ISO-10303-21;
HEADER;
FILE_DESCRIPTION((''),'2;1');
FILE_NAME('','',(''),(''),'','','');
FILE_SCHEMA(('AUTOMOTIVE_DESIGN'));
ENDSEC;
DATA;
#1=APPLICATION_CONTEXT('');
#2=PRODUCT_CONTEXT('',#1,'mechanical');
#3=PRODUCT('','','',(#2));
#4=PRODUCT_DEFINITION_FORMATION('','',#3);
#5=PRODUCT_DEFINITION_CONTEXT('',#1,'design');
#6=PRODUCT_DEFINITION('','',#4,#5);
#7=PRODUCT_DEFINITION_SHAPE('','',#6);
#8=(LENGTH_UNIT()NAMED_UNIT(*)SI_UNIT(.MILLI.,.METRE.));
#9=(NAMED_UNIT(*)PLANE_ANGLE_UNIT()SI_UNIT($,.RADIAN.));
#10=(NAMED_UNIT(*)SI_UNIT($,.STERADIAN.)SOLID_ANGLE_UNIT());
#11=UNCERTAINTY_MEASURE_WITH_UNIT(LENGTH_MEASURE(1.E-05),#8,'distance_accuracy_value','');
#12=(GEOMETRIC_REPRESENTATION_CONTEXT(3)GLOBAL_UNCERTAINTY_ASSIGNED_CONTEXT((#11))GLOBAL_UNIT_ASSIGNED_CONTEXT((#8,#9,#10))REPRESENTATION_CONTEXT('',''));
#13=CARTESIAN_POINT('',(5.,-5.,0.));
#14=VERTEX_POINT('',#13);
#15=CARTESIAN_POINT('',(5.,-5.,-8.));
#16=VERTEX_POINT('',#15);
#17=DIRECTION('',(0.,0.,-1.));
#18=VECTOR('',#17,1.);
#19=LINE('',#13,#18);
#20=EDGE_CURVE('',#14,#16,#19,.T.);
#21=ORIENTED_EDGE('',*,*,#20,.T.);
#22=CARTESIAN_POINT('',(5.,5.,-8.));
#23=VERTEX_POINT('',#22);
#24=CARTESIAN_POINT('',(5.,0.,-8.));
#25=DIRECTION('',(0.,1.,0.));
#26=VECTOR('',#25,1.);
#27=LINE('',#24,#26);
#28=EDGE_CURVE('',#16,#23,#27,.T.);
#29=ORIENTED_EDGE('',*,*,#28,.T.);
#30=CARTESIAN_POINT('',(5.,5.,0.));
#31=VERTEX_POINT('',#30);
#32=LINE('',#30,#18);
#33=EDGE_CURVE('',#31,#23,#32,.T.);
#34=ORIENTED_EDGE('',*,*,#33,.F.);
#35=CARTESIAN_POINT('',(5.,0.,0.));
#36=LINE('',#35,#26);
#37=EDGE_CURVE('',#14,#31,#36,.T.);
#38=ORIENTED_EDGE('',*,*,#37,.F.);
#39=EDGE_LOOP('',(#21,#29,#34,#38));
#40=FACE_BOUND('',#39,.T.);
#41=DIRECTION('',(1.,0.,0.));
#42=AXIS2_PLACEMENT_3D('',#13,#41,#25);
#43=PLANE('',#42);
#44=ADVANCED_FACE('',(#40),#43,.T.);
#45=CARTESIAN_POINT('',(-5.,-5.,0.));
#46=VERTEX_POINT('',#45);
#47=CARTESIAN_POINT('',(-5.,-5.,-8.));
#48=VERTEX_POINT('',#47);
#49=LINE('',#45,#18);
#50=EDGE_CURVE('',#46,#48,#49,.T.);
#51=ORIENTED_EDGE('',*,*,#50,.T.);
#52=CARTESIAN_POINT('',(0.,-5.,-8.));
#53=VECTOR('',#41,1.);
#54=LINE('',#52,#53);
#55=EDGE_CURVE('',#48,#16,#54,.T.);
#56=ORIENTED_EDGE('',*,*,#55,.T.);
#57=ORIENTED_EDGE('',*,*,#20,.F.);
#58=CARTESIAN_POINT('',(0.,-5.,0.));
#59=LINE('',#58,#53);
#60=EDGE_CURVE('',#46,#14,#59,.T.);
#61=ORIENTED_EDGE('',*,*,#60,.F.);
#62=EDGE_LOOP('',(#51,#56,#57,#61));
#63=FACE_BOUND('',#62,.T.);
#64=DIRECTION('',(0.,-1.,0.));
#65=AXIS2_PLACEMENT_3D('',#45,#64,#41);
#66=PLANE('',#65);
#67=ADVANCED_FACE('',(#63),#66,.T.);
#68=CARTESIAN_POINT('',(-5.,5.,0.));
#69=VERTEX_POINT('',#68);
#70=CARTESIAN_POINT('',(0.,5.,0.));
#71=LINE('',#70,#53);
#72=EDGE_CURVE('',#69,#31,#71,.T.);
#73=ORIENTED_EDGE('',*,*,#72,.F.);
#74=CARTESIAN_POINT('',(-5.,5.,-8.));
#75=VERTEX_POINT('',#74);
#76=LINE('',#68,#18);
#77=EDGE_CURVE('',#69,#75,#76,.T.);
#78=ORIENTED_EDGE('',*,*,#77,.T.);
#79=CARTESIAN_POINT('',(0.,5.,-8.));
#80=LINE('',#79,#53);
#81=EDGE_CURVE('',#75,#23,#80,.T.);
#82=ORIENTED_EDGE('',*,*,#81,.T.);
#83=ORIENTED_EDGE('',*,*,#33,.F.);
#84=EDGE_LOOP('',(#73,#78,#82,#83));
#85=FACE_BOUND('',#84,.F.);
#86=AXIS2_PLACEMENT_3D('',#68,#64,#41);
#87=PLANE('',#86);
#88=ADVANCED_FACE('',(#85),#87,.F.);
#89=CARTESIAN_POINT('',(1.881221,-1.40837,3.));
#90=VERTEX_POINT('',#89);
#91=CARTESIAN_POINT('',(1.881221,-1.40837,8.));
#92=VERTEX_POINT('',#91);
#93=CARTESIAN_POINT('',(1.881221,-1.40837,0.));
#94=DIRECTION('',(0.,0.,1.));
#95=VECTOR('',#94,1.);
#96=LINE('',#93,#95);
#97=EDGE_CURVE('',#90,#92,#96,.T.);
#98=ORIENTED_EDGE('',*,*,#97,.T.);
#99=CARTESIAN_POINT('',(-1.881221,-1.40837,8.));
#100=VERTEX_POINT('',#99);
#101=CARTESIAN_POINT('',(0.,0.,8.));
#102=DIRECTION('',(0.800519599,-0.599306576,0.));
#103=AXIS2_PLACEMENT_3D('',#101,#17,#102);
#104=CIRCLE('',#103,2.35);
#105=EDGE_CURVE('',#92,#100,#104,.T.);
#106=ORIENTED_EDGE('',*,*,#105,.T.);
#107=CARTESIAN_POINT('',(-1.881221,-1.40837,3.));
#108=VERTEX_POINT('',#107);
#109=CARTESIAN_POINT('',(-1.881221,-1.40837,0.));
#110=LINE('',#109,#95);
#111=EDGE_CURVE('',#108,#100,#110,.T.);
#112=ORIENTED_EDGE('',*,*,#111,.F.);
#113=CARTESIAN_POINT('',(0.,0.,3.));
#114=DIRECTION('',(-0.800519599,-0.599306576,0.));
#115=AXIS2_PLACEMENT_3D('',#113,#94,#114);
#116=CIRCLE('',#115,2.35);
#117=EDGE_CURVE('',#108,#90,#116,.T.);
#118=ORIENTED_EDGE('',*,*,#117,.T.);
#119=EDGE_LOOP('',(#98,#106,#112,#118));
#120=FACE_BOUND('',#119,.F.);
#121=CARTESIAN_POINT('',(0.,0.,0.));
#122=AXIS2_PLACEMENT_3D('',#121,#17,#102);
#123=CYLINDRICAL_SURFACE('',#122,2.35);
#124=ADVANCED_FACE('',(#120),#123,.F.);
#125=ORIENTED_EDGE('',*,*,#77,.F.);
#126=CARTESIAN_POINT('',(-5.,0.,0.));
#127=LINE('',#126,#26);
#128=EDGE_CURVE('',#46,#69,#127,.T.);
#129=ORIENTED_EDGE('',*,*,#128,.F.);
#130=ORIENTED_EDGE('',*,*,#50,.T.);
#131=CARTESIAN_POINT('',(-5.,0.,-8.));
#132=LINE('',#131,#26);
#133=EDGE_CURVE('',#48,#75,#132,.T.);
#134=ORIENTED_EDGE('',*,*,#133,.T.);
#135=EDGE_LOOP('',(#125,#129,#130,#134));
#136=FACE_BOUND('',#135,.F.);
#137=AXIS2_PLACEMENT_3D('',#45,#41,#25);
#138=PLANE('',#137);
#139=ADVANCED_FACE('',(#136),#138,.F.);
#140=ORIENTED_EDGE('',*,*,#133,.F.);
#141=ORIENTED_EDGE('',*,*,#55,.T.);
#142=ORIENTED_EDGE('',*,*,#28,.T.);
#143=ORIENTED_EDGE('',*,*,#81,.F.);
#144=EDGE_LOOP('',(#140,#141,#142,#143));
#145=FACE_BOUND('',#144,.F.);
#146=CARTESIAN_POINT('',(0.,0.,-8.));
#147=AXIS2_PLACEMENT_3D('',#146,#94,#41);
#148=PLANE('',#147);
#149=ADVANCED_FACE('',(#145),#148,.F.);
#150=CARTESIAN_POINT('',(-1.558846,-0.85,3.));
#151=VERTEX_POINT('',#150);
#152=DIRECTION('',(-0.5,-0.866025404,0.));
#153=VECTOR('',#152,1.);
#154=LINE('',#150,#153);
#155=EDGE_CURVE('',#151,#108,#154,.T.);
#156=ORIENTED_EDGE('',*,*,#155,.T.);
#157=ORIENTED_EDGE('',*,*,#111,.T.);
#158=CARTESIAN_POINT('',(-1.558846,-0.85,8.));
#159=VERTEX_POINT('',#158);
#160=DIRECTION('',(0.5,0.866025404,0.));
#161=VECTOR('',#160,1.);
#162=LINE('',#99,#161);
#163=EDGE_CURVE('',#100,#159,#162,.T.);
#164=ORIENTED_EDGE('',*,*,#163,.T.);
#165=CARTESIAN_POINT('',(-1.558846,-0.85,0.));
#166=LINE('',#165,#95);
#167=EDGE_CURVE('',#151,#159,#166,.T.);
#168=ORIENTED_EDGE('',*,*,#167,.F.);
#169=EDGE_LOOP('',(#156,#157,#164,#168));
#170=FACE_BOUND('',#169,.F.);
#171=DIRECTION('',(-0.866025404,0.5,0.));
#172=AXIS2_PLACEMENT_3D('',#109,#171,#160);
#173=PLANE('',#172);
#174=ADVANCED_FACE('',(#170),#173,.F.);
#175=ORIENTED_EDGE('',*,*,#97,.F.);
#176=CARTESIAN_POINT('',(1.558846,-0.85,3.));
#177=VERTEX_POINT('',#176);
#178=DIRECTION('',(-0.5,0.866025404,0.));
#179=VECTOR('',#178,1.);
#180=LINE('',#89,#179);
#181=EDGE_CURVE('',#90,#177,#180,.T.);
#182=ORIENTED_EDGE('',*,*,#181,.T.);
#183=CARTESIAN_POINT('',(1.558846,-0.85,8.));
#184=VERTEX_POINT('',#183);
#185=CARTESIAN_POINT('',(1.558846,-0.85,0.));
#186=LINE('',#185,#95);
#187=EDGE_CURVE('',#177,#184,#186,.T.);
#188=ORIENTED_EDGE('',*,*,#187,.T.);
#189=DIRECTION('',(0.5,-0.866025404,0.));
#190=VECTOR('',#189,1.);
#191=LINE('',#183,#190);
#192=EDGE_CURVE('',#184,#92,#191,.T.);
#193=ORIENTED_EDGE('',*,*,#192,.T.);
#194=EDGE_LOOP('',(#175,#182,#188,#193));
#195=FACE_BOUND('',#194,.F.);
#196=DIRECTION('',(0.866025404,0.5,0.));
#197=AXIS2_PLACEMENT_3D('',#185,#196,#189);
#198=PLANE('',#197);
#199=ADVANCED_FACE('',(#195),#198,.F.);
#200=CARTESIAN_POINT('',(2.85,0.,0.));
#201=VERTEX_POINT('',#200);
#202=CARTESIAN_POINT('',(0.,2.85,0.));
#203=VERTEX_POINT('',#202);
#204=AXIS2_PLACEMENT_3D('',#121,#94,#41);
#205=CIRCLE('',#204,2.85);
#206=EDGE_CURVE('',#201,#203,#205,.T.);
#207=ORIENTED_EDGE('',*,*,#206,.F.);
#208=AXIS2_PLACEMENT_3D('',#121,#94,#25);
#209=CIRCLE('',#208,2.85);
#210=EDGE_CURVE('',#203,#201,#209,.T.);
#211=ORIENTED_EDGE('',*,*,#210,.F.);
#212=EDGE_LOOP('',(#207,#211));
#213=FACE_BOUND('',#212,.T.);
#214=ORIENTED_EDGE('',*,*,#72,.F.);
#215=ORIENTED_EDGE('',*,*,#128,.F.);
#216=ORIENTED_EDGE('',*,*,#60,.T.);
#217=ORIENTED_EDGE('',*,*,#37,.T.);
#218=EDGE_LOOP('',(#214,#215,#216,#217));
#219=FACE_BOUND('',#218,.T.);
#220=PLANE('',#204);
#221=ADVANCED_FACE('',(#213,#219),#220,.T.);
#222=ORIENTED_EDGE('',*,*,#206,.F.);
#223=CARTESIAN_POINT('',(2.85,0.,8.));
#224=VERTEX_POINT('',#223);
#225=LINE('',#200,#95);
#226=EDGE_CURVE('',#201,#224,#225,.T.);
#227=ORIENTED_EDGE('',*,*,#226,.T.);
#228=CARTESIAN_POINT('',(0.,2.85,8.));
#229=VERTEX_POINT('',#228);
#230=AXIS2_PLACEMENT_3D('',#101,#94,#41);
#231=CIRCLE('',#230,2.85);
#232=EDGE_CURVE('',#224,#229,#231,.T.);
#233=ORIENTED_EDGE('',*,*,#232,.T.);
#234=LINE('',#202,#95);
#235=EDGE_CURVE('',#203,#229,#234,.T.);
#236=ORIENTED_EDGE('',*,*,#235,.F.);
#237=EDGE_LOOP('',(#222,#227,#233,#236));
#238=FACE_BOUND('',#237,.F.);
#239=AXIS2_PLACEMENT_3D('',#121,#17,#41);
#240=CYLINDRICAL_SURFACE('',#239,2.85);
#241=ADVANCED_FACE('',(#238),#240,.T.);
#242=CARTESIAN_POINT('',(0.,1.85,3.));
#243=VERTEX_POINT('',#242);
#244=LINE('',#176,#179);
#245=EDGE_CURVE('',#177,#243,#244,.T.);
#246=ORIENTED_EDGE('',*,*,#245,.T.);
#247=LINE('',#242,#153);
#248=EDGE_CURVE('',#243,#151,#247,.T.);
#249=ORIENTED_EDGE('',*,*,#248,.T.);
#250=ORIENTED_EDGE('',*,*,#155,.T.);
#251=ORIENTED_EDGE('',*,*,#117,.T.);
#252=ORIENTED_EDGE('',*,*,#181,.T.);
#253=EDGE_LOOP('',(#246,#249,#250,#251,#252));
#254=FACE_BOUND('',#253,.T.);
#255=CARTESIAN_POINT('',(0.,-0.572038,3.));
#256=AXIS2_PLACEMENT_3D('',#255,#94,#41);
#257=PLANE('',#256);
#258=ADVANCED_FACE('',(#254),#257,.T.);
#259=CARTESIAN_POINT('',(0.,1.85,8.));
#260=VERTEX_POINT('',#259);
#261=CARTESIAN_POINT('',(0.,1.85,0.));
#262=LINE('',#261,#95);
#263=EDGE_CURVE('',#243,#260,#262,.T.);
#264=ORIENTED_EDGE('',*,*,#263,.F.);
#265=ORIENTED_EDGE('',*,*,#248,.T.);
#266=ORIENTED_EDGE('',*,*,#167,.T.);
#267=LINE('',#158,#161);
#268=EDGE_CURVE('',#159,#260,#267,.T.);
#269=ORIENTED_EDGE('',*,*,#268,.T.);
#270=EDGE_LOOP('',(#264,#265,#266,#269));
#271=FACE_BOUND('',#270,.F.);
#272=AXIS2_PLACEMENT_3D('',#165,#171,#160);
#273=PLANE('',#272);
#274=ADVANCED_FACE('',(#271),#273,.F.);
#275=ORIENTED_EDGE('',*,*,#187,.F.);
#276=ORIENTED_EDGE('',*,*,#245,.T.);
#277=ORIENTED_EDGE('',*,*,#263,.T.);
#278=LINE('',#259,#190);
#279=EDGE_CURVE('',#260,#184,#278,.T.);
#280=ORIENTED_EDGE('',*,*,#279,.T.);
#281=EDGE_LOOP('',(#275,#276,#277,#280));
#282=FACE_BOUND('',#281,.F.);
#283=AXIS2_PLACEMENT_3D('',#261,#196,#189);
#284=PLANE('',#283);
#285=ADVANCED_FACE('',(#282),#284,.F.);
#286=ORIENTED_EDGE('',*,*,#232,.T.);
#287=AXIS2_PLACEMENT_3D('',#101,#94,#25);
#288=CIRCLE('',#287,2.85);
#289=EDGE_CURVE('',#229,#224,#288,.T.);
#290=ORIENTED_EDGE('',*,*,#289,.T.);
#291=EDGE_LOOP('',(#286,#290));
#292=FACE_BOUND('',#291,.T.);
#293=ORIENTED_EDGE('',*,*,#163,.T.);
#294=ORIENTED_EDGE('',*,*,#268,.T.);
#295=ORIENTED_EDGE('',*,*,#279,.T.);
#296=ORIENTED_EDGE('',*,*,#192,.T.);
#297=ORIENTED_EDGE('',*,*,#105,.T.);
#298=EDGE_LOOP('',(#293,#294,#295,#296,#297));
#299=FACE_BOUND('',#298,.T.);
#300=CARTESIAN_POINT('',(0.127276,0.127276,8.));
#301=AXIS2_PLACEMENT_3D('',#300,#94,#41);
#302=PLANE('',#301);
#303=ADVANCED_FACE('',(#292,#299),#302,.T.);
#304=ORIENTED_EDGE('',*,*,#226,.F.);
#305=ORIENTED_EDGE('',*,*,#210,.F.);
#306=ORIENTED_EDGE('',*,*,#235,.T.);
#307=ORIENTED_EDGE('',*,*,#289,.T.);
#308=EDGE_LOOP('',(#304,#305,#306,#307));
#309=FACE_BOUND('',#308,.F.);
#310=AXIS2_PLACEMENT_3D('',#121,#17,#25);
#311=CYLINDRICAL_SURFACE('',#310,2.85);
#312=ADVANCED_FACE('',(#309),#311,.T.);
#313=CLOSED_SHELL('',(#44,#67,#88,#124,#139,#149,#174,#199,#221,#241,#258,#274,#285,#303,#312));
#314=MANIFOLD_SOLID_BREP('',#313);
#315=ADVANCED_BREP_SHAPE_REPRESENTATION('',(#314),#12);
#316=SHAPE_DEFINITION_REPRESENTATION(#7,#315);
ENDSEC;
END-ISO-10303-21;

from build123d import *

# Parameters (mm, degrees)
F1_DEPTH = 8
F2_DEPTH = 3
F3_W     = 10
F3_H     = 10
F4_DEPTH = 8


with BuildPart() as f1:
    # F0 (on Top) → F1 (new body)
    with BuildSketch(Plane.XY):
        with BuildLine():
            ThreePointArc((0, 2.85), (-2.0152543264, -2.0152543264), (2.85, 0))
            ThreePointArc((2.85, 0), (2.0152543264, 2.0152543264), (0, 2.85))
        make_face()
        with BuildLine():
            ThreePointArc((-1.8812210579, -1.4083704525), (-2.1014483771, 1.0518624997), (0, 2.35))
            ThreePointArc((0, 2.35), (1.6617009358, 1.6617009358), (2.35, 0))
            ThreePointArc((2.35, 0), (2.2297275042, -0.7421692913), (1.8812210579, -1.4083704525))
            ThreePointArc((1.8812210579, -1.4083704525), (0, -2.35), (-1.8812210579, -1.4083704525))
        make_face(mode=Mode.SUBTRACT)
        with BuildLine():
            ThreePointArc((2.35, 0), (1.6617009358, 1.6617009358), (0, 2.35))
            Line((0, 2.35), (0, 1.85))
            Line((0, 1.85), (1.5588457268, -0.85))
            Line((1.5588457268, -0.85), (1.8812210579, -1.4083704525))
            ThreePointArc((1.8812210579, -1.4083704525), (2.2297275042, -0.7421692913), (2.35, 0))
        make_face()
        with BuildLine():
            Line((0, 1.85), (0, 2.35))
            ThreePointArc((0, 2.35), (-2.1014483771, 1.0518624997), (-1.8812210579, -1.4083704525))
            Line((-1.8812210579, -1.4083704525), (-1.5588457268, -0.85))
            Line((-1.5588457268, -0.85), (0, 1.85))
        make_face()
    extrude(amount=F1_DEPTH)

    # F0 (on Top) → F2 (join)
    with BuildSketch(Plane.XY):
        with BuildLine():
            Line((-1.5588457268, -0.85), (-1.8812210579, -1.4083704525))
            ThreePointArc((-1.8812210579, -1.4083704525), (0, -2.35), (1.8812210579, -1.4083704525))
            Line((1.8812210579, -1.4083704525), (1.5588457268, -0.85))
            Line((1.5588457268, -0.85), (0, 1.85))
            Line((0, 1.85), (-1.5588457268, -0.85))
        make_face()
    extrude(amount=F2_DEPTH)

    # F3 (on Top) → F4 (join)
    with BuildSketch(Plane.XY):
        Rectangle(F3_W, F3_H)
    extrude(amount=-F4_DEPTH)


solid = f1.part
